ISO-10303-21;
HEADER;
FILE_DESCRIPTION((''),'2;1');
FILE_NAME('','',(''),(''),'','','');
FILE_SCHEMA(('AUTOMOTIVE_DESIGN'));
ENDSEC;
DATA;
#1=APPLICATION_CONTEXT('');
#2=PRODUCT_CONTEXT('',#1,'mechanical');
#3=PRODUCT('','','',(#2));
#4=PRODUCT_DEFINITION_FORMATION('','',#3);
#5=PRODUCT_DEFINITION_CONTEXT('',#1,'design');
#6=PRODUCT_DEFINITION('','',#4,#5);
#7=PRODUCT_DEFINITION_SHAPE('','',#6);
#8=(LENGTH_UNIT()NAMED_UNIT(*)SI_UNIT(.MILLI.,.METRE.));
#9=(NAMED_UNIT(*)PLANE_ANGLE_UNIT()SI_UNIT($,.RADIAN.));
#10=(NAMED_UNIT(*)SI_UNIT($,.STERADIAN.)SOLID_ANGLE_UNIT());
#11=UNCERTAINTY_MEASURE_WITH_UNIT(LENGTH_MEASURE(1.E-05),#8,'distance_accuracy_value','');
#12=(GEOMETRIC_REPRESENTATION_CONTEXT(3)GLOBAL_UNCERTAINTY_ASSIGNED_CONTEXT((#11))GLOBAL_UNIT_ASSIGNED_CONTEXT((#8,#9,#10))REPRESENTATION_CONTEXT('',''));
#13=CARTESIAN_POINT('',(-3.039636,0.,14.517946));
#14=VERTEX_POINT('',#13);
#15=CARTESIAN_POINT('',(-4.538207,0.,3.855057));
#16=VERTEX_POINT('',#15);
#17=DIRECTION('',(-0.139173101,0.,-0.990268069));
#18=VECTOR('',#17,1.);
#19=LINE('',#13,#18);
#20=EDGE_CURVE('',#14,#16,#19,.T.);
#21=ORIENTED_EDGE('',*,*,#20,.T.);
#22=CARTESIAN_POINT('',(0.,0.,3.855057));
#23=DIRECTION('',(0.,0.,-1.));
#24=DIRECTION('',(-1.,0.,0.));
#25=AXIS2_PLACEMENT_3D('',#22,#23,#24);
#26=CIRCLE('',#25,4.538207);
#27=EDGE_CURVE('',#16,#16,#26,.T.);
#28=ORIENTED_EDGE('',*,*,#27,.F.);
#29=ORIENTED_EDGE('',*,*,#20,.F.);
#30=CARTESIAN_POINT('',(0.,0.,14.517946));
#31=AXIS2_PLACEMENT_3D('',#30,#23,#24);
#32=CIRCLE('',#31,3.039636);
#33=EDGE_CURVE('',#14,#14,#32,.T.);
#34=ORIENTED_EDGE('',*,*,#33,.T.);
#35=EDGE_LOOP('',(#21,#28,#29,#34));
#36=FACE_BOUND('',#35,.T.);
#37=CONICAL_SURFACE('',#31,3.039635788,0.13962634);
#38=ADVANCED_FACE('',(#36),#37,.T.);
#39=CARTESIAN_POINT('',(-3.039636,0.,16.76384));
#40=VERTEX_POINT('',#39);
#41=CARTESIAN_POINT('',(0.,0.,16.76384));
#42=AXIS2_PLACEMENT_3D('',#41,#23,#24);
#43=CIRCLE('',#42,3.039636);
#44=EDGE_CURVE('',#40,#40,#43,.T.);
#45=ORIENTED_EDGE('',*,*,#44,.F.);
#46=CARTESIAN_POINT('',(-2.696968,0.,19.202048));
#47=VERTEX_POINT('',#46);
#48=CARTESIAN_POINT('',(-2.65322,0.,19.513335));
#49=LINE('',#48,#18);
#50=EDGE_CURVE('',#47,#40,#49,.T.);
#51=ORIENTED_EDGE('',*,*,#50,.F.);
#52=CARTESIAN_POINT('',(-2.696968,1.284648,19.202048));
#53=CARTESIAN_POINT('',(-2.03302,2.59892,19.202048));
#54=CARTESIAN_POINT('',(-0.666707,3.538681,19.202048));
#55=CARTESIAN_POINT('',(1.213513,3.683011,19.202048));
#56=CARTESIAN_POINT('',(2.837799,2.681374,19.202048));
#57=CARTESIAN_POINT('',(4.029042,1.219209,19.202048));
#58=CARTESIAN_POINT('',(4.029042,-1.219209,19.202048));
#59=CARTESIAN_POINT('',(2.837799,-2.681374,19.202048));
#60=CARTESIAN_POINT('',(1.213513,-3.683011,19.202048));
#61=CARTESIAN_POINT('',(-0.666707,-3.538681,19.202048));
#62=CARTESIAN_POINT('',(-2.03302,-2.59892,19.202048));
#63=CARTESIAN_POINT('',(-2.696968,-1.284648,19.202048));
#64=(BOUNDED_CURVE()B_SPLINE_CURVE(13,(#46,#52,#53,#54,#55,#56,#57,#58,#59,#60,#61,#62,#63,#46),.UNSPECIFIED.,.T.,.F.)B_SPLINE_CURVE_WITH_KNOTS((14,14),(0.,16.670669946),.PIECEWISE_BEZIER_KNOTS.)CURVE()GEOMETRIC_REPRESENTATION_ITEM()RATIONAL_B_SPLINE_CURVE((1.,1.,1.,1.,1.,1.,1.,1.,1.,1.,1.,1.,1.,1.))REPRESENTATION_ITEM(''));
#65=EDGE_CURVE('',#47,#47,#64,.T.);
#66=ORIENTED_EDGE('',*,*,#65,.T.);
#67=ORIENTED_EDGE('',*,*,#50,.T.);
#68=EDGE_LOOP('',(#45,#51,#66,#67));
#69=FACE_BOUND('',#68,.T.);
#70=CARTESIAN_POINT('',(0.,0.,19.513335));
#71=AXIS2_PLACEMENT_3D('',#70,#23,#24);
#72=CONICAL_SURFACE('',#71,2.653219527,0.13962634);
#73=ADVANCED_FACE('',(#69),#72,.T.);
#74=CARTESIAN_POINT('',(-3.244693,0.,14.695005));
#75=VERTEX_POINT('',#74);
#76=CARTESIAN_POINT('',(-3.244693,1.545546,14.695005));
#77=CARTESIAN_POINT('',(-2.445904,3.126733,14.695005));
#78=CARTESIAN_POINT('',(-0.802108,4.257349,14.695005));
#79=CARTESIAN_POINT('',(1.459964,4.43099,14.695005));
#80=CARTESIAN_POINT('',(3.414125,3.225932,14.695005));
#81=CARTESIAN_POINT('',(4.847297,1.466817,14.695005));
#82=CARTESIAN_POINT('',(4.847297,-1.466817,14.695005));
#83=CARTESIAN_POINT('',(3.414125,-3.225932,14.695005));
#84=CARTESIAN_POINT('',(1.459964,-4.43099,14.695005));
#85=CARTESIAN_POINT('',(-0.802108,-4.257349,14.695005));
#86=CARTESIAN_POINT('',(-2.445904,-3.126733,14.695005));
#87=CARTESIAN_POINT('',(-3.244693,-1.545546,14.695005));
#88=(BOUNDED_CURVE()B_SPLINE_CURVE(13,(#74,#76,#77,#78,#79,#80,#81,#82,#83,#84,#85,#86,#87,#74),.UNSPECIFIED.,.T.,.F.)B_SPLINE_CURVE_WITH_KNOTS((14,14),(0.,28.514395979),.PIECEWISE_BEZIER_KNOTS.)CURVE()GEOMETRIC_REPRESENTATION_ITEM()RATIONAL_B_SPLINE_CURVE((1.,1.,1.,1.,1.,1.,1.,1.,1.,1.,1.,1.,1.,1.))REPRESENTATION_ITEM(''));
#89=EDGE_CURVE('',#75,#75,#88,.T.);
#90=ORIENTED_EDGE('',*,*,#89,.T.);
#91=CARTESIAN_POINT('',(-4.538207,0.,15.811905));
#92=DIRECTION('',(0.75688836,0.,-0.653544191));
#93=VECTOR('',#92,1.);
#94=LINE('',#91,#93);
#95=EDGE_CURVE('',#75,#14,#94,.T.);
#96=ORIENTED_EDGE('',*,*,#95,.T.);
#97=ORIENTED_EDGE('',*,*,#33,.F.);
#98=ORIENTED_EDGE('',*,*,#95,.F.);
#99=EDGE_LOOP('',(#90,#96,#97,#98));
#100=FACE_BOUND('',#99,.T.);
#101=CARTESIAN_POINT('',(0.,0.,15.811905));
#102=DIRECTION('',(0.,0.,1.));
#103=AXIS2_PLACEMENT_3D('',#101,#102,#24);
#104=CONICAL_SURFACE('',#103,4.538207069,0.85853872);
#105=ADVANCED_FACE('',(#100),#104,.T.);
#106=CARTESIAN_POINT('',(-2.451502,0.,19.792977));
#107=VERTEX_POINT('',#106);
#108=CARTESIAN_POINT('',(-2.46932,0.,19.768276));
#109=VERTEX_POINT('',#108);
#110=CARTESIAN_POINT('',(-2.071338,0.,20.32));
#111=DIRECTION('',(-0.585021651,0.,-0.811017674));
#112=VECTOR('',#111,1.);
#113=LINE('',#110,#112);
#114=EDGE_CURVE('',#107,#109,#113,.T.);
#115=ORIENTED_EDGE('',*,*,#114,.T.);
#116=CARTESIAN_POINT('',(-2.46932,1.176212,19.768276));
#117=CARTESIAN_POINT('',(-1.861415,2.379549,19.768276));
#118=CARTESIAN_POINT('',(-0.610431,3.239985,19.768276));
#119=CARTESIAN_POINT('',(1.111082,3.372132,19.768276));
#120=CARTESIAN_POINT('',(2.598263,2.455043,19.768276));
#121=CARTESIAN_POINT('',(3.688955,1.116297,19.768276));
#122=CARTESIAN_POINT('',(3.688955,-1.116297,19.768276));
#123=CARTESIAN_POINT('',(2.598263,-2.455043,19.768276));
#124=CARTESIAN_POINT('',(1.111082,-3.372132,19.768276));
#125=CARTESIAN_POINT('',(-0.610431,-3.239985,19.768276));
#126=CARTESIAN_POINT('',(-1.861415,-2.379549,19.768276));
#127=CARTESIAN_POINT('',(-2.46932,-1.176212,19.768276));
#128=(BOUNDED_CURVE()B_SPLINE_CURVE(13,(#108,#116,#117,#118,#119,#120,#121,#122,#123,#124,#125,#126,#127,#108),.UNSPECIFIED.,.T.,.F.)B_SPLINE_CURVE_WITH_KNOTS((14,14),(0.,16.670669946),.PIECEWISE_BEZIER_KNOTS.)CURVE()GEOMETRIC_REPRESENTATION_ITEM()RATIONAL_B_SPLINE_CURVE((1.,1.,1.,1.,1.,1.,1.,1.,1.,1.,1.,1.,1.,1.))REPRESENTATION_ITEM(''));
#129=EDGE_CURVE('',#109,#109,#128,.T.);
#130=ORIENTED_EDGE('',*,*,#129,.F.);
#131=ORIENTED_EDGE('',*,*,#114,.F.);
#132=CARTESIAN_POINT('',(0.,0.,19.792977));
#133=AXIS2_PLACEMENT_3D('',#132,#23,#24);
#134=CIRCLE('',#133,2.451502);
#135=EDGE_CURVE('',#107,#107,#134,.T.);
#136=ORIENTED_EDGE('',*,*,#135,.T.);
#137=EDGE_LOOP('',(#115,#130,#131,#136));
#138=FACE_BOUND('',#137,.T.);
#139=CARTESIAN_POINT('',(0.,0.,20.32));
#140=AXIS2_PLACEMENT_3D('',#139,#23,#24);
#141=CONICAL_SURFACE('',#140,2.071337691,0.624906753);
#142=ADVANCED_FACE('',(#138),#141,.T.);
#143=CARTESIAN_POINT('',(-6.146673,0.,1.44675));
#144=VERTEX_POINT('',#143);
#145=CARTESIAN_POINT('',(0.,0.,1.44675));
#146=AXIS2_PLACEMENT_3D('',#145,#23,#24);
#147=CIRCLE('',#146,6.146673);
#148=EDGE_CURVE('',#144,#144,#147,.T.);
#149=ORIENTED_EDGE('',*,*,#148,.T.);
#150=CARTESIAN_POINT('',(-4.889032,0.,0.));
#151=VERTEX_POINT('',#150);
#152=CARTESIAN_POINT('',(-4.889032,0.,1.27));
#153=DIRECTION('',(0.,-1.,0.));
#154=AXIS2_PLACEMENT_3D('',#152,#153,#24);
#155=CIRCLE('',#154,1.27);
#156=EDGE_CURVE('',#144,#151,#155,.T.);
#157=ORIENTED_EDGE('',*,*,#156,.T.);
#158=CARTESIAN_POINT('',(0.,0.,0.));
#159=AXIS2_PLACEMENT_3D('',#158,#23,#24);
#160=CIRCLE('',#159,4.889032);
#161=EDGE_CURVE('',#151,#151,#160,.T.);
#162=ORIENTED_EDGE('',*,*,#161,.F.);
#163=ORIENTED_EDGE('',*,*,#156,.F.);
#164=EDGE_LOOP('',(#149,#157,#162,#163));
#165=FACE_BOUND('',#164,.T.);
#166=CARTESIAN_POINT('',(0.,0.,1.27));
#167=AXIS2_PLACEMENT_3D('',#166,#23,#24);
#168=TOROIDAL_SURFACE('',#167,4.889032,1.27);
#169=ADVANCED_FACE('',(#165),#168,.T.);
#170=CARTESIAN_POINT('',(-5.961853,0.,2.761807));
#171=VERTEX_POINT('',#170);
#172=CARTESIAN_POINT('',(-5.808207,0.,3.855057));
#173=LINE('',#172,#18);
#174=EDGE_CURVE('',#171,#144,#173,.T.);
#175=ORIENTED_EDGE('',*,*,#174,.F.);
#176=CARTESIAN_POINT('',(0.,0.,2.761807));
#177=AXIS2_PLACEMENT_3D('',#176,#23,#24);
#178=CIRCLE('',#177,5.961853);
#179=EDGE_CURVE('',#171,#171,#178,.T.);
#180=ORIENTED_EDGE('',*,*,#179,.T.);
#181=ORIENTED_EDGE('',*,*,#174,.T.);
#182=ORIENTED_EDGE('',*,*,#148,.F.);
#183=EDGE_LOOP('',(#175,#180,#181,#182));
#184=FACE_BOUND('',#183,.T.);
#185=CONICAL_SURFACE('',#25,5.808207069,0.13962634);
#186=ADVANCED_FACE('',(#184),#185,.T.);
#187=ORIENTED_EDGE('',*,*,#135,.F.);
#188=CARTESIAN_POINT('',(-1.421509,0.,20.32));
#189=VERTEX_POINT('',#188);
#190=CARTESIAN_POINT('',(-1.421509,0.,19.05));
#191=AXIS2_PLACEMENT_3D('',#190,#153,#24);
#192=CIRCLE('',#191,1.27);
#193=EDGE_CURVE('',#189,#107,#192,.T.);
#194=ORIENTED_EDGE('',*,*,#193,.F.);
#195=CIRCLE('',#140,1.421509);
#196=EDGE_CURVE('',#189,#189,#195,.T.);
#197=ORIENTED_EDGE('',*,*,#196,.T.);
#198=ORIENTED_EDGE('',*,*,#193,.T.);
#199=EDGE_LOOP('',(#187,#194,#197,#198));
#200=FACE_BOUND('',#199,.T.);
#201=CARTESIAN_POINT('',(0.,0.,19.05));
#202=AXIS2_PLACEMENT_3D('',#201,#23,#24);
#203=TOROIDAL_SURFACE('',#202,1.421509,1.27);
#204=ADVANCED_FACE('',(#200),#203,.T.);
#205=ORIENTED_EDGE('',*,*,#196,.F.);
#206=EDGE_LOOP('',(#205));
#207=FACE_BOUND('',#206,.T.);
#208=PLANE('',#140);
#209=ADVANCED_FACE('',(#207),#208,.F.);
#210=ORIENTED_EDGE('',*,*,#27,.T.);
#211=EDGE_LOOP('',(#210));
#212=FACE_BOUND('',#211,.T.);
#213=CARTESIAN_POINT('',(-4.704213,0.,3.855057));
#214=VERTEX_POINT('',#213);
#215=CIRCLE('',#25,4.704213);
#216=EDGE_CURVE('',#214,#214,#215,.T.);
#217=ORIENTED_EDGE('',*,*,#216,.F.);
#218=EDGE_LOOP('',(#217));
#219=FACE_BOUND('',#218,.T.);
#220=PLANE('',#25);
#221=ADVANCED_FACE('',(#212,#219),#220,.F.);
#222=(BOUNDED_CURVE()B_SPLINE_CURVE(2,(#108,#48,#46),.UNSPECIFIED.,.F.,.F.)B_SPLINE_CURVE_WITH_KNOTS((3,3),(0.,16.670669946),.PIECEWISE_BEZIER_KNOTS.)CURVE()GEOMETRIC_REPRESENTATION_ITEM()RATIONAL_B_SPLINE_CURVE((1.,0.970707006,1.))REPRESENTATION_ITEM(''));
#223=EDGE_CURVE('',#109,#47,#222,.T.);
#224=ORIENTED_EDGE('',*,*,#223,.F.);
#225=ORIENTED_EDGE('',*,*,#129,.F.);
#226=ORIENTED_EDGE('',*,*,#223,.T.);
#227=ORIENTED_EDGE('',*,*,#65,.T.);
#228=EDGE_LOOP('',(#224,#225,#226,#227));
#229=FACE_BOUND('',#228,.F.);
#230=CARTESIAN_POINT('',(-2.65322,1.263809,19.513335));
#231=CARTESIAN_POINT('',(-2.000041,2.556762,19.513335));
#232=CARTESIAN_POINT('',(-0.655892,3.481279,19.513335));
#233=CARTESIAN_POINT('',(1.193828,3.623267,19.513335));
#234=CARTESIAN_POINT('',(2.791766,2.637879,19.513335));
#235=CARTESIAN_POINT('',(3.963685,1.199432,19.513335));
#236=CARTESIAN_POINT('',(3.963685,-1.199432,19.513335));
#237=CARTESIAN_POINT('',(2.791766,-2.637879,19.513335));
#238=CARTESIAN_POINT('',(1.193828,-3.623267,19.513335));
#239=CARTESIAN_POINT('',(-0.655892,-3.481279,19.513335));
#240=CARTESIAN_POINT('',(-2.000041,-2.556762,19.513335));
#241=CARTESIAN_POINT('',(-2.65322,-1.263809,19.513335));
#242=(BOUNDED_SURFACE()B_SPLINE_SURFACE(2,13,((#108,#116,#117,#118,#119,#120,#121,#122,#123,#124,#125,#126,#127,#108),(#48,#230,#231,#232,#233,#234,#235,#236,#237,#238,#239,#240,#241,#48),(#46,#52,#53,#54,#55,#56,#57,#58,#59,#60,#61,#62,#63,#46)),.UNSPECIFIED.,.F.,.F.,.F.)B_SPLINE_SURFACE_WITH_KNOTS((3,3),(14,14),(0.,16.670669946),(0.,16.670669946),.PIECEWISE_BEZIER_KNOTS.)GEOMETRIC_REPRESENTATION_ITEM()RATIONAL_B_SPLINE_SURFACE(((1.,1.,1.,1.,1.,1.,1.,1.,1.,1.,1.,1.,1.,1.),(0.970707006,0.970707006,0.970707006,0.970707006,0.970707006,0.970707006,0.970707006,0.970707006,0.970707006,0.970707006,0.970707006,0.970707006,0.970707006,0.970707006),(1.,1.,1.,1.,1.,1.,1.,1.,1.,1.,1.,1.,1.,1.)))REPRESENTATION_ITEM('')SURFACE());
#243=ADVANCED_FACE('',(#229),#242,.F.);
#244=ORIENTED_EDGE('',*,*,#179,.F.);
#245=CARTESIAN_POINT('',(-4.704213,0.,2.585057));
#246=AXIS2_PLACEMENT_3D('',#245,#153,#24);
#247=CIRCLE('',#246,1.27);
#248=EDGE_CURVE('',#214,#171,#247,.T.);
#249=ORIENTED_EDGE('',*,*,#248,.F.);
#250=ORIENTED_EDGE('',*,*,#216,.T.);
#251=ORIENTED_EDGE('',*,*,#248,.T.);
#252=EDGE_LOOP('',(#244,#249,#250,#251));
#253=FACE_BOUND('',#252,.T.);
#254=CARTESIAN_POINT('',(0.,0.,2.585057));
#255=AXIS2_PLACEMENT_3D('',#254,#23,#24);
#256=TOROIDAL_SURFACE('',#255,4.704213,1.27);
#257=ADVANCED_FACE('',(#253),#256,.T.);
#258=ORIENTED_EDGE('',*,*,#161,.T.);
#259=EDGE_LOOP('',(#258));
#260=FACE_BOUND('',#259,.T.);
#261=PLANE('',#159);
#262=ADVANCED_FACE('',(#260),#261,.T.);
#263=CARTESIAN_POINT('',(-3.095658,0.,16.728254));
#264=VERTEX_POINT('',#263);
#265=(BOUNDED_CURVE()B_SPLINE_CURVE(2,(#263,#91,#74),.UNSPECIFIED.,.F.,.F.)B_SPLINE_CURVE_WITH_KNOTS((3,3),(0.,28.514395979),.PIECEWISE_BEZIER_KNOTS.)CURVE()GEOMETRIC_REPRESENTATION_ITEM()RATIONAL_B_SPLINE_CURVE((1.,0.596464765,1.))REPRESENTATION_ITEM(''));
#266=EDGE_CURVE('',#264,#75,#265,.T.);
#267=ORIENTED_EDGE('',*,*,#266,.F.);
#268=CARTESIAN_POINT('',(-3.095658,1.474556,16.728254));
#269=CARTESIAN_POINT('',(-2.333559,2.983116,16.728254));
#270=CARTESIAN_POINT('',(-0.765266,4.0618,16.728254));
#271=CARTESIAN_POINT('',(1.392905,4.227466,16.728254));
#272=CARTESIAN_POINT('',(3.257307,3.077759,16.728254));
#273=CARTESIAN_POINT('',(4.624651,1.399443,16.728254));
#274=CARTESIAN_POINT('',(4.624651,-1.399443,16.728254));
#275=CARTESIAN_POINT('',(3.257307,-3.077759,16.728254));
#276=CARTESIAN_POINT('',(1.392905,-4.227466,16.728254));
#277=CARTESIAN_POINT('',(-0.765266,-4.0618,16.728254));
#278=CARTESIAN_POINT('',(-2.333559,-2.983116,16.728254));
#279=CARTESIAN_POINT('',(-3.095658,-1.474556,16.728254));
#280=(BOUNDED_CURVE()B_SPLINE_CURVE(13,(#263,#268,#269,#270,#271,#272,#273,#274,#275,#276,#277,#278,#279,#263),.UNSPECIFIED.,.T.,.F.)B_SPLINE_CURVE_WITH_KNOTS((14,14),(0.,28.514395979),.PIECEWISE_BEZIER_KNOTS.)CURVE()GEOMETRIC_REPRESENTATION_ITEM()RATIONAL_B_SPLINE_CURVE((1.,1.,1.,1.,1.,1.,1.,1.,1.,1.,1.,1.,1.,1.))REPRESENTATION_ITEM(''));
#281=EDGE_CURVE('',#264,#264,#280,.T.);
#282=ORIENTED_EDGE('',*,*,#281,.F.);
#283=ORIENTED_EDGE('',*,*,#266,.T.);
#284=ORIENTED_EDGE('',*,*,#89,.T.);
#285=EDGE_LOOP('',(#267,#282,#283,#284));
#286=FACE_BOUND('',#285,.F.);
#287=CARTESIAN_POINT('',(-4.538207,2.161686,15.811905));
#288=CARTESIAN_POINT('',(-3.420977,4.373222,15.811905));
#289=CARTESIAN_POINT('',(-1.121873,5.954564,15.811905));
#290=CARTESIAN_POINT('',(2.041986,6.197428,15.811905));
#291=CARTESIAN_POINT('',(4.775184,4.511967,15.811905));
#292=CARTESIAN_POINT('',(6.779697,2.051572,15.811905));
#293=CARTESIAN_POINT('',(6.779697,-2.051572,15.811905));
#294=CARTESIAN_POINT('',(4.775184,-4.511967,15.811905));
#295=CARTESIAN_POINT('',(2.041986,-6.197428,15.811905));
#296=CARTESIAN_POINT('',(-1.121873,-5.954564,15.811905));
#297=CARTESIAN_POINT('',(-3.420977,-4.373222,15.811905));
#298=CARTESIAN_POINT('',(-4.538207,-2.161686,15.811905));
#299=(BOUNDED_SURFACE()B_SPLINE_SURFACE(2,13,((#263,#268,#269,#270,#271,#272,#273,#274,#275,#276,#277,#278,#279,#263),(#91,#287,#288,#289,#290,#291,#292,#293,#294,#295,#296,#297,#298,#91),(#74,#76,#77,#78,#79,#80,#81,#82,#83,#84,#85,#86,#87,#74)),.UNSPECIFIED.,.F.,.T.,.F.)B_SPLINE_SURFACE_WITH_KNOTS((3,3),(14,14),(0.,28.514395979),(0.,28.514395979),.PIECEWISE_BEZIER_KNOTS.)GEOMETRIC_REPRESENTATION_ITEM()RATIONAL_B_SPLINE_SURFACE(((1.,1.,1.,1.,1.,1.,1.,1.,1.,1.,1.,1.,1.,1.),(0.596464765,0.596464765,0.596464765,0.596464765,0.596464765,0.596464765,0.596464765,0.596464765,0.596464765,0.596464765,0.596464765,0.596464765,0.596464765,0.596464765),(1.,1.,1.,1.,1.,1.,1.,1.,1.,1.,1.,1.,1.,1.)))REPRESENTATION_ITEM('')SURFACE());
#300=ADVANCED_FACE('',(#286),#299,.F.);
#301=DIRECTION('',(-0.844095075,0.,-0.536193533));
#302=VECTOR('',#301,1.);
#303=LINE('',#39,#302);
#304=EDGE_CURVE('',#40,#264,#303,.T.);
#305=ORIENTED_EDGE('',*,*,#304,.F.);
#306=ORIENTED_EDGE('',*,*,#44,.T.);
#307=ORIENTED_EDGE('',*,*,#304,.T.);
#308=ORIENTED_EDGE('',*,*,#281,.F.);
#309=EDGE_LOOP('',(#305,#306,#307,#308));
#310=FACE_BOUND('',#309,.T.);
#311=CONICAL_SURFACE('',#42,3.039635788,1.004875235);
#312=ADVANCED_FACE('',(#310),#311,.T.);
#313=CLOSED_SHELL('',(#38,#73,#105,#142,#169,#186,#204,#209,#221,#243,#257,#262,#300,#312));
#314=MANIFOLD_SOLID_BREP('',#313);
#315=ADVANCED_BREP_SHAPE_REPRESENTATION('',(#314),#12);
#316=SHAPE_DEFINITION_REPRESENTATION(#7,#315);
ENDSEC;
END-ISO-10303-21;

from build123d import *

# Parameters (mm, degrees)
F2_R = 1.27
F3_R = 1.27


with BuildPart() as f1:
    # F0 (on Front) → F1 (revolve)
    with BuildSketch(Plane.XZ):
        Polygon((-5.8082070693, 3.8550570151), (-6.35, 0), (0, 0), (0, 20.32), (-2.071337691, 20.32), (-2.6532195265, 19.5133350633), (-3.0396357876, 16.7638404987), (-4.5382070693, 15.8119048065), (-3.0396357876, 14.5179457392), (-4.5382070693, 3.8550570151), align=None)
    revolve(axis=Axis((0, 0, 10.16), (0, 0, -1)))

    # F2
    f2_edges = [f1.edges().sort_by_distance(p)[0] for p in [
        (2.071338, 0, 20.32),
        (2.65322, 0, 19.513335),
        (-2.362279, 0, 19.916668),
    ]]
    fillet(f2_edges, radius=F2_R)

    # F3
    f3_edges = [f1.edges().sort_by_distance(p)[0] for p in [
        (5.808207, 0, 3.855057),
        (1.421509, 0, 20.32),
        (4.538207, 0, 15.811905),
        (6.35, 0, 0),
    ]]
    fillet(f3_edges, radius=F3_R)


solid = f1.part
